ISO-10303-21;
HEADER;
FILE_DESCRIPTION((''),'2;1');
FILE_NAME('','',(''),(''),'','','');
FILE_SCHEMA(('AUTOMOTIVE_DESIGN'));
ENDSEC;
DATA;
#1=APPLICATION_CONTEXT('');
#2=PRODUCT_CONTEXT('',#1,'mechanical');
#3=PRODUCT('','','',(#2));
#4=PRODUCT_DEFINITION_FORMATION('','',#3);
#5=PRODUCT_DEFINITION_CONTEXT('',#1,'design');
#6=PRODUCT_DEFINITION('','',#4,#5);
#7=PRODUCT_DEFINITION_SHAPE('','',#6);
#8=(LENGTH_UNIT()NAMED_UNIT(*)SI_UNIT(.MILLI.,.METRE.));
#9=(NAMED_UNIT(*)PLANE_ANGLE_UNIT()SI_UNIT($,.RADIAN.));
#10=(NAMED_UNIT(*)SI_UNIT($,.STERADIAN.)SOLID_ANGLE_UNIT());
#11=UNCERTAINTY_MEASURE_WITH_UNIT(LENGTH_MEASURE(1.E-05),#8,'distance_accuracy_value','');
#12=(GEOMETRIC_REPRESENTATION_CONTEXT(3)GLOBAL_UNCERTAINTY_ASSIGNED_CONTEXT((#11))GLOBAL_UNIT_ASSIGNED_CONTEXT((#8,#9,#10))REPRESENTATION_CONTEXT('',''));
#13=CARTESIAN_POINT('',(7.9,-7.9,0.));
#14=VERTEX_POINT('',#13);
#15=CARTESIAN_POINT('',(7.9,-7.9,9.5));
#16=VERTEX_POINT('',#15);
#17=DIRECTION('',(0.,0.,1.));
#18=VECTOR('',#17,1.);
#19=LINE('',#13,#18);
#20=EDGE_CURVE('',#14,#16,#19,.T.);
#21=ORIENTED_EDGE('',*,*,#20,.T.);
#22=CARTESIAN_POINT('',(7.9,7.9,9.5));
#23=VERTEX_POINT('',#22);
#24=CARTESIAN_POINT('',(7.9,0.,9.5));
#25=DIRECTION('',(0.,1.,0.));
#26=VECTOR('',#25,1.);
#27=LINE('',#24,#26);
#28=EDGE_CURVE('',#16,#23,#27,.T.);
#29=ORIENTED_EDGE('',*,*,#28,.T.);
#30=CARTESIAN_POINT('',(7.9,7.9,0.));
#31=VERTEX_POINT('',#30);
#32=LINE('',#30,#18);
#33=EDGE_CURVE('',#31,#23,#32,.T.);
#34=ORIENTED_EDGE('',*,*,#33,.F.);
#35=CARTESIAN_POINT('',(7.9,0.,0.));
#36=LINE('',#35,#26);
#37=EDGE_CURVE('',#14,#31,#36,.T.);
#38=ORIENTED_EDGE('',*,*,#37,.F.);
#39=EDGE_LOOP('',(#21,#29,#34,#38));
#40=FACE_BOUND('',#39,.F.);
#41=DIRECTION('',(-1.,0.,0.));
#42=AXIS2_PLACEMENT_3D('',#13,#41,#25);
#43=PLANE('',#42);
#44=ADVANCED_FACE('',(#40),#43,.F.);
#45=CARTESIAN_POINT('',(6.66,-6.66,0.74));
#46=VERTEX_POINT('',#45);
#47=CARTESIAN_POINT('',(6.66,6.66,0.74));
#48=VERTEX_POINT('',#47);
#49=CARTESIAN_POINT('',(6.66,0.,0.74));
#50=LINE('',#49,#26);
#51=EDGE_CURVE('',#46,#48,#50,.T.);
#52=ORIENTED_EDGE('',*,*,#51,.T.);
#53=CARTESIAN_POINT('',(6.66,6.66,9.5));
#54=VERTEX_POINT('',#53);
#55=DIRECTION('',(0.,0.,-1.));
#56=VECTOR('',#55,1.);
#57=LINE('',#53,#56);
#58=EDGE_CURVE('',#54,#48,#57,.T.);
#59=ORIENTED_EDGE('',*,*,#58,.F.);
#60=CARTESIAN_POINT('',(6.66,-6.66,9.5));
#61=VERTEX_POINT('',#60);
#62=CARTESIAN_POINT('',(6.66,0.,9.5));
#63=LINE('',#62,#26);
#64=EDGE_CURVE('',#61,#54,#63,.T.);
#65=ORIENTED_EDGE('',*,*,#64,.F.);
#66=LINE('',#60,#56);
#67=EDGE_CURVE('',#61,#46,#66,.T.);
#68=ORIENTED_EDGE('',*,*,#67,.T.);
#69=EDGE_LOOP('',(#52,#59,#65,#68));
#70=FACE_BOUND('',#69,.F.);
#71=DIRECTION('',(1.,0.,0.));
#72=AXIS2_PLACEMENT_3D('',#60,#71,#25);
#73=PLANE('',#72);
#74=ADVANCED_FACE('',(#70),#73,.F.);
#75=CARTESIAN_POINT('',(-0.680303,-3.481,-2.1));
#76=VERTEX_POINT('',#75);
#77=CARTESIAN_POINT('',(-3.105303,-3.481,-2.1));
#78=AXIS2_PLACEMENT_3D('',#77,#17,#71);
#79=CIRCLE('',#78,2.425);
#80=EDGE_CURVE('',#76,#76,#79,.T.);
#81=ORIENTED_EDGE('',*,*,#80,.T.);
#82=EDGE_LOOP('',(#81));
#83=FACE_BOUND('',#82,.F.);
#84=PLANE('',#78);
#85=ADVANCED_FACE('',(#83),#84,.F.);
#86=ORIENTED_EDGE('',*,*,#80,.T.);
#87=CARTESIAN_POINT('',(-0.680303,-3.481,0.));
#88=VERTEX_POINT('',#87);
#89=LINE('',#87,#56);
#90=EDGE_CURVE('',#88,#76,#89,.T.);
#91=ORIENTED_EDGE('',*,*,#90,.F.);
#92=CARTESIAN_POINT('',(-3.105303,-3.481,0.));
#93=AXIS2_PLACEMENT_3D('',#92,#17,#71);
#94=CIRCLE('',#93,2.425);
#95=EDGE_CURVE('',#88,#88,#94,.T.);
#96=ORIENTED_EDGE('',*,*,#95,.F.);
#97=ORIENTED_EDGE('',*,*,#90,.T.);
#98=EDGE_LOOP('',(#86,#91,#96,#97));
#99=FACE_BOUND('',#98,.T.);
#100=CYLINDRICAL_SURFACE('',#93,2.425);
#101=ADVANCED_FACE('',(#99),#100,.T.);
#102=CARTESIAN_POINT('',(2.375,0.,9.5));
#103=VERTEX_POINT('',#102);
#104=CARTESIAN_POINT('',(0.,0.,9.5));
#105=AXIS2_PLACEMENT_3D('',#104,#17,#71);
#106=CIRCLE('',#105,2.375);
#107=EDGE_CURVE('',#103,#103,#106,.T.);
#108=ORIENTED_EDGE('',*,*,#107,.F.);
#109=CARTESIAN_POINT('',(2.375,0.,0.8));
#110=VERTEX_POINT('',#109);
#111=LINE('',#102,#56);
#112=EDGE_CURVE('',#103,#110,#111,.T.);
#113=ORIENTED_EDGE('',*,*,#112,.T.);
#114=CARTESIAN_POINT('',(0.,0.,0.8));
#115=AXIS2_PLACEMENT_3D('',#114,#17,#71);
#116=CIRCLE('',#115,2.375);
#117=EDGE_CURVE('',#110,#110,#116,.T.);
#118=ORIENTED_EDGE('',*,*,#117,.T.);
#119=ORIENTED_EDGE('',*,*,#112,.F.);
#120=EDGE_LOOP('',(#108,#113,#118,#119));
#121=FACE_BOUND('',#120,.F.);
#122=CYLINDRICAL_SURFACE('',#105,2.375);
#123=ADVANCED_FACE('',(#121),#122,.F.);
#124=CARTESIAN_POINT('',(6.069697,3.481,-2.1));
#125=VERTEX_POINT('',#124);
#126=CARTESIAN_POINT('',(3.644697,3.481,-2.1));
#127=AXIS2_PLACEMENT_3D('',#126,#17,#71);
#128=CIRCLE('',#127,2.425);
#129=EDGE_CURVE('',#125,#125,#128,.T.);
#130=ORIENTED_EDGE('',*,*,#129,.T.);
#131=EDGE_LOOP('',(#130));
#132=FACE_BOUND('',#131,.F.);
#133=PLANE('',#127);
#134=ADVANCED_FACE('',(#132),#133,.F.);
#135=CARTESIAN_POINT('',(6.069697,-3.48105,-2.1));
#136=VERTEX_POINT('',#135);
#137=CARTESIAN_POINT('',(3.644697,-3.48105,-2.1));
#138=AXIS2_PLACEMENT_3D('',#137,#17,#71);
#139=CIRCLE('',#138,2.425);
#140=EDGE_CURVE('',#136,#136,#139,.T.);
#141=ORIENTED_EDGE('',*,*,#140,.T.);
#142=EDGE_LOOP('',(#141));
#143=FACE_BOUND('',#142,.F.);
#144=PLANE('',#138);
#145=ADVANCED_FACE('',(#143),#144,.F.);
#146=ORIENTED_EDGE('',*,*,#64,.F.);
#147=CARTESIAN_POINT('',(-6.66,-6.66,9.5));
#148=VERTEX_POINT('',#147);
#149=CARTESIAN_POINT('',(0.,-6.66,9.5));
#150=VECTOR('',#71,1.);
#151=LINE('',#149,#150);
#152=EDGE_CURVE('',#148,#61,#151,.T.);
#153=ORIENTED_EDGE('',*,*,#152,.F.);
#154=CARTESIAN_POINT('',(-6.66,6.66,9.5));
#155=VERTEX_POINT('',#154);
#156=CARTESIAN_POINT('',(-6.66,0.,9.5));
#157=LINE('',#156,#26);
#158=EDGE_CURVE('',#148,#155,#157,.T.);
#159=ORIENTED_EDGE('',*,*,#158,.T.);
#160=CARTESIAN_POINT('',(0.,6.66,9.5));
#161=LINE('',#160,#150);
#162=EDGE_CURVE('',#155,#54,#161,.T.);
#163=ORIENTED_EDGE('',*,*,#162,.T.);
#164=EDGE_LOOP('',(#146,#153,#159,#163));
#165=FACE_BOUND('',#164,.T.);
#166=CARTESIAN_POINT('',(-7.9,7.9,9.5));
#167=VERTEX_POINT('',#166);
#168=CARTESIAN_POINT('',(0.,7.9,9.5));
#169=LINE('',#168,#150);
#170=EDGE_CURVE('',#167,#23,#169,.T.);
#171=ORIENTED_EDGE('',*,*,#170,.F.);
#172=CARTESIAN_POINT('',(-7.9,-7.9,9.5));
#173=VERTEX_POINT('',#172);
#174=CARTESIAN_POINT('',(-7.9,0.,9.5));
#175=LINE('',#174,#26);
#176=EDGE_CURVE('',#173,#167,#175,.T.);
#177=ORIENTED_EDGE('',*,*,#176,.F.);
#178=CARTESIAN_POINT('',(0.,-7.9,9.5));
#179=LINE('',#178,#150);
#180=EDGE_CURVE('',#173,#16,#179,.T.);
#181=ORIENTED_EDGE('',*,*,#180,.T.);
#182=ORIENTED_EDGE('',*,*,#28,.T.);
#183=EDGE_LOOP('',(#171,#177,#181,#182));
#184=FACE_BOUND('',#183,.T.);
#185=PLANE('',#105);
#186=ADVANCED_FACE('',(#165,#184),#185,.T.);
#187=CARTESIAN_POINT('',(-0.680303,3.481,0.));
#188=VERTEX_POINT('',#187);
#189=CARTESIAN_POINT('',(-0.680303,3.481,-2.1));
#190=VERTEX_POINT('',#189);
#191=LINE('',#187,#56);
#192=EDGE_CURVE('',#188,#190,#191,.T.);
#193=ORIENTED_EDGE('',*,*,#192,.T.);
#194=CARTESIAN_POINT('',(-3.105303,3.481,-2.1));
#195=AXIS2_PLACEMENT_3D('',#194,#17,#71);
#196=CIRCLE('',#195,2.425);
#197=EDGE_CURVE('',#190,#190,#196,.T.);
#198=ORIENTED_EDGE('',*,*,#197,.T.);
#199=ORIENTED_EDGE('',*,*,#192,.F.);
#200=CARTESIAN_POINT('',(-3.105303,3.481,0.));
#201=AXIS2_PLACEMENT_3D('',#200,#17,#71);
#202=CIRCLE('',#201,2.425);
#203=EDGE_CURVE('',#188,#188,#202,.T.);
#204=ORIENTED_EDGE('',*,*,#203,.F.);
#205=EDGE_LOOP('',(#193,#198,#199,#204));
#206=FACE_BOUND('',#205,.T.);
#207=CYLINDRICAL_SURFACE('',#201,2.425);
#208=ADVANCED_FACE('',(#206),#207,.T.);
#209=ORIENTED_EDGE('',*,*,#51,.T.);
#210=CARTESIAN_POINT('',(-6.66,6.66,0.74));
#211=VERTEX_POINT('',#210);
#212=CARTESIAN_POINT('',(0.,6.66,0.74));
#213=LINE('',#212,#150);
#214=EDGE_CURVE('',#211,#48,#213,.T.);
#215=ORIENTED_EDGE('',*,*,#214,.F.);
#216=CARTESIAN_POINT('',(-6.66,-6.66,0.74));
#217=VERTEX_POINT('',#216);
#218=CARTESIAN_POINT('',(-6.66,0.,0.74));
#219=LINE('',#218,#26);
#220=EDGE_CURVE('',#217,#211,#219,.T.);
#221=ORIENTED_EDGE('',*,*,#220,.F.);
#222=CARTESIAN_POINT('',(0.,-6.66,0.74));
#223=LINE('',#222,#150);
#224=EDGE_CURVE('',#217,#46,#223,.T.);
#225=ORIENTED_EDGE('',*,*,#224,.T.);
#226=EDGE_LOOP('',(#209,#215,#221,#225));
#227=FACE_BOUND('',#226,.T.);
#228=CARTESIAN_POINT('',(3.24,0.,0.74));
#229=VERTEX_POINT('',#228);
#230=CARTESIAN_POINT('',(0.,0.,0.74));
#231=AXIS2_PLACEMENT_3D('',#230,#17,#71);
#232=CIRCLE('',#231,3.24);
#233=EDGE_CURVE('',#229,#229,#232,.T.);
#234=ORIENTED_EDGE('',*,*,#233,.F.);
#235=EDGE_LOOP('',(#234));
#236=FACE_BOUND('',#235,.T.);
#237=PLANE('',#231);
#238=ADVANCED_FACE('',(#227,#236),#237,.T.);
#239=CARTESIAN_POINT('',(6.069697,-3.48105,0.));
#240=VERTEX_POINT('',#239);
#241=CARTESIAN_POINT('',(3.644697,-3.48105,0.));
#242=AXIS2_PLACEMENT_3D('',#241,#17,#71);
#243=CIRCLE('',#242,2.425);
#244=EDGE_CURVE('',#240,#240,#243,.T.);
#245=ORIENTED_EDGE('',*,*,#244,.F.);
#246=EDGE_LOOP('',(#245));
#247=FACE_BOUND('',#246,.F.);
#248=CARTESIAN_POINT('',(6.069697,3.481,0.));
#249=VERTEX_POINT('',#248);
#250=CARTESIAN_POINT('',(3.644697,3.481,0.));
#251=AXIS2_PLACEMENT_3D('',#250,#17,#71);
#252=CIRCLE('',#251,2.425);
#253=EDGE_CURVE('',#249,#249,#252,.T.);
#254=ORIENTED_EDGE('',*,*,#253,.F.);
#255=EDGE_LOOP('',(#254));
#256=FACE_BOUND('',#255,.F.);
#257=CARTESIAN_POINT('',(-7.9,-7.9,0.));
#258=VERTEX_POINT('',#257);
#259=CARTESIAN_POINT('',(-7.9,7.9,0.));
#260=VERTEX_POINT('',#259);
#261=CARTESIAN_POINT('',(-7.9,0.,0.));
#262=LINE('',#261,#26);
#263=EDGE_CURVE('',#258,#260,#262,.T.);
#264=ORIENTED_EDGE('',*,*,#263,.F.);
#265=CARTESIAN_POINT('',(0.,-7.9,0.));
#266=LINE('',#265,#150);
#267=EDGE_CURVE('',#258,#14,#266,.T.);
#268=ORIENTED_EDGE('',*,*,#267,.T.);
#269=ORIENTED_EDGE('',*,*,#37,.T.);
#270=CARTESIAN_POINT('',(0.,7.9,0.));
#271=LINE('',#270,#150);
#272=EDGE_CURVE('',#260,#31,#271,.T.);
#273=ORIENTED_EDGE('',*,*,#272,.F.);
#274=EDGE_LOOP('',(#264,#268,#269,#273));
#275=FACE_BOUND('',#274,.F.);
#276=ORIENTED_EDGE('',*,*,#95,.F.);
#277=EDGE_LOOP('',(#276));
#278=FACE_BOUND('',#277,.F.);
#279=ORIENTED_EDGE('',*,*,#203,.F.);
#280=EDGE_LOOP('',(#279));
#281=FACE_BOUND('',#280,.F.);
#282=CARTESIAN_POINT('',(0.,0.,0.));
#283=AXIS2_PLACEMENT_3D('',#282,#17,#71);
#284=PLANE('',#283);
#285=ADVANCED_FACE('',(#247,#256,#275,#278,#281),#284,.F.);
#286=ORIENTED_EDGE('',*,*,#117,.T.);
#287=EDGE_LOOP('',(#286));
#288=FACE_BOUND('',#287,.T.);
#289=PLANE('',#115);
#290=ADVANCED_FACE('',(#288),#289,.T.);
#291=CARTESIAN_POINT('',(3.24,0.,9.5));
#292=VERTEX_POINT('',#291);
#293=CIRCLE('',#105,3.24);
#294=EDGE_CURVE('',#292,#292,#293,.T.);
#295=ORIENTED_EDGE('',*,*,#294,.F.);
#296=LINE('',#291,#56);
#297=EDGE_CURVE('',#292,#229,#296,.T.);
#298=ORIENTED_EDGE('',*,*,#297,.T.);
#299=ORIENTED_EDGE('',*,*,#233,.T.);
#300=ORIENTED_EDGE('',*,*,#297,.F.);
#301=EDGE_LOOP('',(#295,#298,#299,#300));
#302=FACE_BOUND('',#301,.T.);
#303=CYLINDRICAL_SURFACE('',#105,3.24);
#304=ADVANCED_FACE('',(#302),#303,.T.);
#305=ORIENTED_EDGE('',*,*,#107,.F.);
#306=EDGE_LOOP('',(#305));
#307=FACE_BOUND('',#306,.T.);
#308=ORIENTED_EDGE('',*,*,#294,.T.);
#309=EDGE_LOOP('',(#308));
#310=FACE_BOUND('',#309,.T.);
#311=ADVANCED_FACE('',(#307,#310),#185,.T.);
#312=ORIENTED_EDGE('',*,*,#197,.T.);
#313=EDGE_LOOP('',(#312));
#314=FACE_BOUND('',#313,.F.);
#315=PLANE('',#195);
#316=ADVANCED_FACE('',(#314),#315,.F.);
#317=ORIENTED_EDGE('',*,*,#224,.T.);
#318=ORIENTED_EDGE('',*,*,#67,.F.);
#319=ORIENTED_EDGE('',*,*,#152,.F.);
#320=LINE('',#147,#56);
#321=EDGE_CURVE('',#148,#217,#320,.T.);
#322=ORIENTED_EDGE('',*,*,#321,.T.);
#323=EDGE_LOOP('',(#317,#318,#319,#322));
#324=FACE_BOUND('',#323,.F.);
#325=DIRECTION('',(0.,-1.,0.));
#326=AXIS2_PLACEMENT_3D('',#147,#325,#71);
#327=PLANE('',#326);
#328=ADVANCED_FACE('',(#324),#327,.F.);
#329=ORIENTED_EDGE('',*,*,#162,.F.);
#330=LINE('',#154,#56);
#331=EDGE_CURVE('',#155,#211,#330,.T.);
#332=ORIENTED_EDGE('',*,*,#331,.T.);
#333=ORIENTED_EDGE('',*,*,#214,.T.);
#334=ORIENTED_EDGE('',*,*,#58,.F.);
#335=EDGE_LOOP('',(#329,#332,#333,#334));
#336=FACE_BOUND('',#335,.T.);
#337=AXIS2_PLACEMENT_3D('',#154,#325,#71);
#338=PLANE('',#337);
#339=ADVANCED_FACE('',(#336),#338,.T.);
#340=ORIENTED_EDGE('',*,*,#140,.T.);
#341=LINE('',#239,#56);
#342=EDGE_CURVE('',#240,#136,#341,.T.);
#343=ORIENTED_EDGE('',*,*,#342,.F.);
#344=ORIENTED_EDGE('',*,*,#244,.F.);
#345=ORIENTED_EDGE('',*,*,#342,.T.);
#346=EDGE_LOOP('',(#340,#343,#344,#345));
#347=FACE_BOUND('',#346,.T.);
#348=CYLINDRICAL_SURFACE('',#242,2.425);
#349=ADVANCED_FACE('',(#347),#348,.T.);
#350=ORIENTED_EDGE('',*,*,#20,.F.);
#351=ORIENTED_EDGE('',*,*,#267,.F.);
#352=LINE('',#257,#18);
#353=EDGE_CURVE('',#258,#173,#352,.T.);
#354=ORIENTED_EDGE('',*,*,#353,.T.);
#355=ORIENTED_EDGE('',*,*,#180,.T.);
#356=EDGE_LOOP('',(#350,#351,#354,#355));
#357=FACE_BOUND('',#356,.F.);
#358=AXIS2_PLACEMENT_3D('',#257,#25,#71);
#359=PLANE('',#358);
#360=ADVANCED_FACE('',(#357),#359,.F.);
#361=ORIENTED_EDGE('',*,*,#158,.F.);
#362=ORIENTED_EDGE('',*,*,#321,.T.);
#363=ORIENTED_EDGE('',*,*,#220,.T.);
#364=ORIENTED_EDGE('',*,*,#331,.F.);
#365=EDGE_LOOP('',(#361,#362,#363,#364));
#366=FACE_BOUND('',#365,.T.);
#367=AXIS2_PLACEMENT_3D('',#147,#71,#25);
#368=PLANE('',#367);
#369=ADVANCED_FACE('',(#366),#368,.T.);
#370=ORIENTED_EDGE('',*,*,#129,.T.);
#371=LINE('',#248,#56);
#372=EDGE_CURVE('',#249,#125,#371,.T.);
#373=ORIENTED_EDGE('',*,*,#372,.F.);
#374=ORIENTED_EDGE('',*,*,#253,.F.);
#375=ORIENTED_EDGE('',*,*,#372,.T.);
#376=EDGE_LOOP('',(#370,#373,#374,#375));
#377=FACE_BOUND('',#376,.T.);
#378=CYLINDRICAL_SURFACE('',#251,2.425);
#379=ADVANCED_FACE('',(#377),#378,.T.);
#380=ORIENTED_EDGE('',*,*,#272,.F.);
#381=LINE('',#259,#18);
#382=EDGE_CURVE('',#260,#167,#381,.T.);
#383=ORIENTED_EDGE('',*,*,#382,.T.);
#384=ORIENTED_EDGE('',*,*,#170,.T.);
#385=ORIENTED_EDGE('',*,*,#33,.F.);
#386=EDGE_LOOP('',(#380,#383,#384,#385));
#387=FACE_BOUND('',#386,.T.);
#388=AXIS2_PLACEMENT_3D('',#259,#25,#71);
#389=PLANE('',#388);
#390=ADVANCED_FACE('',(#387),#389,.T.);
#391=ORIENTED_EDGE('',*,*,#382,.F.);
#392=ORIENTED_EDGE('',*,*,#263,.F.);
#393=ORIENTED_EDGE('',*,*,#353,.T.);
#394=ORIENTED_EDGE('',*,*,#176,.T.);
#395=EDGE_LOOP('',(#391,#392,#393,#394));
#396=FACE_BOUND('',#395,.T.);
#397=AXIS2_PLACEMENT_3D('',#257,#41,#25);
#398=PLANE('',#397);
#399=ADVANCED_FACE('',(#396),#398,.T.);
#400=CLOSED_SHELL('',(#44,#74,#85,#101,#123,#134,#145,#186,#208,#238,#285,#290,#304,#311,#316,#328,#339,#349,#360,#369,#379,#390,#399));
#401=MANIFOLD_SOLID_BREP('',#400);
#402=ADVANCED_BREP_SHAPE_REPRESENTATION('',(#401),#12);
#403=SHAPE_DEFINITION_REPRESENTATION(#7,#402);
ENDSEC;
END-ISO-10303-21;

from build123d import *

# Parameters (mm, degrees)
F0_W     = 15.8
F0_H     = 15.8
F0_R     = 2.425
F1_DEPTH = 9.5
F2_DEPTH = 2.1
F3_W     = 13.32
F3_H     = 13.32
F3_R     = 3.24
F4_DEPTH = 8.76
F5_R     = 2.375
F6_DEPTH = 8.7


# Not quite as in the source:
# - a feature names something its author has since deleted; it is built from what else it names


with BuildPart() as f1:
    # F0 (on Top) → F1 (new body)
    with BuildSketch(Plane.XY):
        Rectangle(F0_W, F0_H)
        with Locations((-3.1053028645, -3.481)):
            Circle(F0_R, mode=Mode.SUBTRACT)
        with Locations((3.6446971353, -3.4810496163)):
            Circle(F0_R, mode=Mode.SUBTRACT)
        with Locations((-3.1053028647, 3.481)):
            Circle(F0_R, mode=Mode.SUBTRACT)
        with Locations((3.6446971353, 3.481)):
            Circle(F0_R, mode=Mode.SUBTRACT)
        with Locations((3.6446971353, -3.4810496163)):
            Circle(F0_R)
        with Locations((-3.1053028645, -3.481)):
            Circle(F0_R)
        with Locations((-3.1053028647, 3.481)):
            Circle(F0_R)
        with Locations((3.6446971353, 3.481)):
            Circle(F0_R)
    extrude(amount=F1_DEPTH)

    # F0 (on Top) → F2 (join)
    with BuildSketch(Plane.XY):
        with Locations((3.6446971353, 3.481)):
            Circle(F0_R)
        with Locations((-3.1053028647, 3.481)):
            Circle(F0_R)
        with Locations((-3.1053028645, -3.481)):
            Circle(F0_R)
        with Locations((3.6446971353, -3.4810496163)):
            Circle(F0_R)
    extrude(amount=-F2_DEPTH)

    # F3 (on face) → F4 (cut)
    with BuildSketch(Plane.XY.offset(9.5)):
        Rectangle(F3_W, F3_H)
        Circle(F3_R, mode=Mode.SUBTRACT)
    extrude(amount=-F4_DEPTH, mode=Mode.SUBTRACT)

    # F5 (on face) → F6 (cut)
    with BuildSketch(Plane.XY.offset(9.5)):
        Circle(F5_R)
    extrude(amount=-F6_DEPTH, mode=Mode.SUBTRACT)


solid = f1.part
